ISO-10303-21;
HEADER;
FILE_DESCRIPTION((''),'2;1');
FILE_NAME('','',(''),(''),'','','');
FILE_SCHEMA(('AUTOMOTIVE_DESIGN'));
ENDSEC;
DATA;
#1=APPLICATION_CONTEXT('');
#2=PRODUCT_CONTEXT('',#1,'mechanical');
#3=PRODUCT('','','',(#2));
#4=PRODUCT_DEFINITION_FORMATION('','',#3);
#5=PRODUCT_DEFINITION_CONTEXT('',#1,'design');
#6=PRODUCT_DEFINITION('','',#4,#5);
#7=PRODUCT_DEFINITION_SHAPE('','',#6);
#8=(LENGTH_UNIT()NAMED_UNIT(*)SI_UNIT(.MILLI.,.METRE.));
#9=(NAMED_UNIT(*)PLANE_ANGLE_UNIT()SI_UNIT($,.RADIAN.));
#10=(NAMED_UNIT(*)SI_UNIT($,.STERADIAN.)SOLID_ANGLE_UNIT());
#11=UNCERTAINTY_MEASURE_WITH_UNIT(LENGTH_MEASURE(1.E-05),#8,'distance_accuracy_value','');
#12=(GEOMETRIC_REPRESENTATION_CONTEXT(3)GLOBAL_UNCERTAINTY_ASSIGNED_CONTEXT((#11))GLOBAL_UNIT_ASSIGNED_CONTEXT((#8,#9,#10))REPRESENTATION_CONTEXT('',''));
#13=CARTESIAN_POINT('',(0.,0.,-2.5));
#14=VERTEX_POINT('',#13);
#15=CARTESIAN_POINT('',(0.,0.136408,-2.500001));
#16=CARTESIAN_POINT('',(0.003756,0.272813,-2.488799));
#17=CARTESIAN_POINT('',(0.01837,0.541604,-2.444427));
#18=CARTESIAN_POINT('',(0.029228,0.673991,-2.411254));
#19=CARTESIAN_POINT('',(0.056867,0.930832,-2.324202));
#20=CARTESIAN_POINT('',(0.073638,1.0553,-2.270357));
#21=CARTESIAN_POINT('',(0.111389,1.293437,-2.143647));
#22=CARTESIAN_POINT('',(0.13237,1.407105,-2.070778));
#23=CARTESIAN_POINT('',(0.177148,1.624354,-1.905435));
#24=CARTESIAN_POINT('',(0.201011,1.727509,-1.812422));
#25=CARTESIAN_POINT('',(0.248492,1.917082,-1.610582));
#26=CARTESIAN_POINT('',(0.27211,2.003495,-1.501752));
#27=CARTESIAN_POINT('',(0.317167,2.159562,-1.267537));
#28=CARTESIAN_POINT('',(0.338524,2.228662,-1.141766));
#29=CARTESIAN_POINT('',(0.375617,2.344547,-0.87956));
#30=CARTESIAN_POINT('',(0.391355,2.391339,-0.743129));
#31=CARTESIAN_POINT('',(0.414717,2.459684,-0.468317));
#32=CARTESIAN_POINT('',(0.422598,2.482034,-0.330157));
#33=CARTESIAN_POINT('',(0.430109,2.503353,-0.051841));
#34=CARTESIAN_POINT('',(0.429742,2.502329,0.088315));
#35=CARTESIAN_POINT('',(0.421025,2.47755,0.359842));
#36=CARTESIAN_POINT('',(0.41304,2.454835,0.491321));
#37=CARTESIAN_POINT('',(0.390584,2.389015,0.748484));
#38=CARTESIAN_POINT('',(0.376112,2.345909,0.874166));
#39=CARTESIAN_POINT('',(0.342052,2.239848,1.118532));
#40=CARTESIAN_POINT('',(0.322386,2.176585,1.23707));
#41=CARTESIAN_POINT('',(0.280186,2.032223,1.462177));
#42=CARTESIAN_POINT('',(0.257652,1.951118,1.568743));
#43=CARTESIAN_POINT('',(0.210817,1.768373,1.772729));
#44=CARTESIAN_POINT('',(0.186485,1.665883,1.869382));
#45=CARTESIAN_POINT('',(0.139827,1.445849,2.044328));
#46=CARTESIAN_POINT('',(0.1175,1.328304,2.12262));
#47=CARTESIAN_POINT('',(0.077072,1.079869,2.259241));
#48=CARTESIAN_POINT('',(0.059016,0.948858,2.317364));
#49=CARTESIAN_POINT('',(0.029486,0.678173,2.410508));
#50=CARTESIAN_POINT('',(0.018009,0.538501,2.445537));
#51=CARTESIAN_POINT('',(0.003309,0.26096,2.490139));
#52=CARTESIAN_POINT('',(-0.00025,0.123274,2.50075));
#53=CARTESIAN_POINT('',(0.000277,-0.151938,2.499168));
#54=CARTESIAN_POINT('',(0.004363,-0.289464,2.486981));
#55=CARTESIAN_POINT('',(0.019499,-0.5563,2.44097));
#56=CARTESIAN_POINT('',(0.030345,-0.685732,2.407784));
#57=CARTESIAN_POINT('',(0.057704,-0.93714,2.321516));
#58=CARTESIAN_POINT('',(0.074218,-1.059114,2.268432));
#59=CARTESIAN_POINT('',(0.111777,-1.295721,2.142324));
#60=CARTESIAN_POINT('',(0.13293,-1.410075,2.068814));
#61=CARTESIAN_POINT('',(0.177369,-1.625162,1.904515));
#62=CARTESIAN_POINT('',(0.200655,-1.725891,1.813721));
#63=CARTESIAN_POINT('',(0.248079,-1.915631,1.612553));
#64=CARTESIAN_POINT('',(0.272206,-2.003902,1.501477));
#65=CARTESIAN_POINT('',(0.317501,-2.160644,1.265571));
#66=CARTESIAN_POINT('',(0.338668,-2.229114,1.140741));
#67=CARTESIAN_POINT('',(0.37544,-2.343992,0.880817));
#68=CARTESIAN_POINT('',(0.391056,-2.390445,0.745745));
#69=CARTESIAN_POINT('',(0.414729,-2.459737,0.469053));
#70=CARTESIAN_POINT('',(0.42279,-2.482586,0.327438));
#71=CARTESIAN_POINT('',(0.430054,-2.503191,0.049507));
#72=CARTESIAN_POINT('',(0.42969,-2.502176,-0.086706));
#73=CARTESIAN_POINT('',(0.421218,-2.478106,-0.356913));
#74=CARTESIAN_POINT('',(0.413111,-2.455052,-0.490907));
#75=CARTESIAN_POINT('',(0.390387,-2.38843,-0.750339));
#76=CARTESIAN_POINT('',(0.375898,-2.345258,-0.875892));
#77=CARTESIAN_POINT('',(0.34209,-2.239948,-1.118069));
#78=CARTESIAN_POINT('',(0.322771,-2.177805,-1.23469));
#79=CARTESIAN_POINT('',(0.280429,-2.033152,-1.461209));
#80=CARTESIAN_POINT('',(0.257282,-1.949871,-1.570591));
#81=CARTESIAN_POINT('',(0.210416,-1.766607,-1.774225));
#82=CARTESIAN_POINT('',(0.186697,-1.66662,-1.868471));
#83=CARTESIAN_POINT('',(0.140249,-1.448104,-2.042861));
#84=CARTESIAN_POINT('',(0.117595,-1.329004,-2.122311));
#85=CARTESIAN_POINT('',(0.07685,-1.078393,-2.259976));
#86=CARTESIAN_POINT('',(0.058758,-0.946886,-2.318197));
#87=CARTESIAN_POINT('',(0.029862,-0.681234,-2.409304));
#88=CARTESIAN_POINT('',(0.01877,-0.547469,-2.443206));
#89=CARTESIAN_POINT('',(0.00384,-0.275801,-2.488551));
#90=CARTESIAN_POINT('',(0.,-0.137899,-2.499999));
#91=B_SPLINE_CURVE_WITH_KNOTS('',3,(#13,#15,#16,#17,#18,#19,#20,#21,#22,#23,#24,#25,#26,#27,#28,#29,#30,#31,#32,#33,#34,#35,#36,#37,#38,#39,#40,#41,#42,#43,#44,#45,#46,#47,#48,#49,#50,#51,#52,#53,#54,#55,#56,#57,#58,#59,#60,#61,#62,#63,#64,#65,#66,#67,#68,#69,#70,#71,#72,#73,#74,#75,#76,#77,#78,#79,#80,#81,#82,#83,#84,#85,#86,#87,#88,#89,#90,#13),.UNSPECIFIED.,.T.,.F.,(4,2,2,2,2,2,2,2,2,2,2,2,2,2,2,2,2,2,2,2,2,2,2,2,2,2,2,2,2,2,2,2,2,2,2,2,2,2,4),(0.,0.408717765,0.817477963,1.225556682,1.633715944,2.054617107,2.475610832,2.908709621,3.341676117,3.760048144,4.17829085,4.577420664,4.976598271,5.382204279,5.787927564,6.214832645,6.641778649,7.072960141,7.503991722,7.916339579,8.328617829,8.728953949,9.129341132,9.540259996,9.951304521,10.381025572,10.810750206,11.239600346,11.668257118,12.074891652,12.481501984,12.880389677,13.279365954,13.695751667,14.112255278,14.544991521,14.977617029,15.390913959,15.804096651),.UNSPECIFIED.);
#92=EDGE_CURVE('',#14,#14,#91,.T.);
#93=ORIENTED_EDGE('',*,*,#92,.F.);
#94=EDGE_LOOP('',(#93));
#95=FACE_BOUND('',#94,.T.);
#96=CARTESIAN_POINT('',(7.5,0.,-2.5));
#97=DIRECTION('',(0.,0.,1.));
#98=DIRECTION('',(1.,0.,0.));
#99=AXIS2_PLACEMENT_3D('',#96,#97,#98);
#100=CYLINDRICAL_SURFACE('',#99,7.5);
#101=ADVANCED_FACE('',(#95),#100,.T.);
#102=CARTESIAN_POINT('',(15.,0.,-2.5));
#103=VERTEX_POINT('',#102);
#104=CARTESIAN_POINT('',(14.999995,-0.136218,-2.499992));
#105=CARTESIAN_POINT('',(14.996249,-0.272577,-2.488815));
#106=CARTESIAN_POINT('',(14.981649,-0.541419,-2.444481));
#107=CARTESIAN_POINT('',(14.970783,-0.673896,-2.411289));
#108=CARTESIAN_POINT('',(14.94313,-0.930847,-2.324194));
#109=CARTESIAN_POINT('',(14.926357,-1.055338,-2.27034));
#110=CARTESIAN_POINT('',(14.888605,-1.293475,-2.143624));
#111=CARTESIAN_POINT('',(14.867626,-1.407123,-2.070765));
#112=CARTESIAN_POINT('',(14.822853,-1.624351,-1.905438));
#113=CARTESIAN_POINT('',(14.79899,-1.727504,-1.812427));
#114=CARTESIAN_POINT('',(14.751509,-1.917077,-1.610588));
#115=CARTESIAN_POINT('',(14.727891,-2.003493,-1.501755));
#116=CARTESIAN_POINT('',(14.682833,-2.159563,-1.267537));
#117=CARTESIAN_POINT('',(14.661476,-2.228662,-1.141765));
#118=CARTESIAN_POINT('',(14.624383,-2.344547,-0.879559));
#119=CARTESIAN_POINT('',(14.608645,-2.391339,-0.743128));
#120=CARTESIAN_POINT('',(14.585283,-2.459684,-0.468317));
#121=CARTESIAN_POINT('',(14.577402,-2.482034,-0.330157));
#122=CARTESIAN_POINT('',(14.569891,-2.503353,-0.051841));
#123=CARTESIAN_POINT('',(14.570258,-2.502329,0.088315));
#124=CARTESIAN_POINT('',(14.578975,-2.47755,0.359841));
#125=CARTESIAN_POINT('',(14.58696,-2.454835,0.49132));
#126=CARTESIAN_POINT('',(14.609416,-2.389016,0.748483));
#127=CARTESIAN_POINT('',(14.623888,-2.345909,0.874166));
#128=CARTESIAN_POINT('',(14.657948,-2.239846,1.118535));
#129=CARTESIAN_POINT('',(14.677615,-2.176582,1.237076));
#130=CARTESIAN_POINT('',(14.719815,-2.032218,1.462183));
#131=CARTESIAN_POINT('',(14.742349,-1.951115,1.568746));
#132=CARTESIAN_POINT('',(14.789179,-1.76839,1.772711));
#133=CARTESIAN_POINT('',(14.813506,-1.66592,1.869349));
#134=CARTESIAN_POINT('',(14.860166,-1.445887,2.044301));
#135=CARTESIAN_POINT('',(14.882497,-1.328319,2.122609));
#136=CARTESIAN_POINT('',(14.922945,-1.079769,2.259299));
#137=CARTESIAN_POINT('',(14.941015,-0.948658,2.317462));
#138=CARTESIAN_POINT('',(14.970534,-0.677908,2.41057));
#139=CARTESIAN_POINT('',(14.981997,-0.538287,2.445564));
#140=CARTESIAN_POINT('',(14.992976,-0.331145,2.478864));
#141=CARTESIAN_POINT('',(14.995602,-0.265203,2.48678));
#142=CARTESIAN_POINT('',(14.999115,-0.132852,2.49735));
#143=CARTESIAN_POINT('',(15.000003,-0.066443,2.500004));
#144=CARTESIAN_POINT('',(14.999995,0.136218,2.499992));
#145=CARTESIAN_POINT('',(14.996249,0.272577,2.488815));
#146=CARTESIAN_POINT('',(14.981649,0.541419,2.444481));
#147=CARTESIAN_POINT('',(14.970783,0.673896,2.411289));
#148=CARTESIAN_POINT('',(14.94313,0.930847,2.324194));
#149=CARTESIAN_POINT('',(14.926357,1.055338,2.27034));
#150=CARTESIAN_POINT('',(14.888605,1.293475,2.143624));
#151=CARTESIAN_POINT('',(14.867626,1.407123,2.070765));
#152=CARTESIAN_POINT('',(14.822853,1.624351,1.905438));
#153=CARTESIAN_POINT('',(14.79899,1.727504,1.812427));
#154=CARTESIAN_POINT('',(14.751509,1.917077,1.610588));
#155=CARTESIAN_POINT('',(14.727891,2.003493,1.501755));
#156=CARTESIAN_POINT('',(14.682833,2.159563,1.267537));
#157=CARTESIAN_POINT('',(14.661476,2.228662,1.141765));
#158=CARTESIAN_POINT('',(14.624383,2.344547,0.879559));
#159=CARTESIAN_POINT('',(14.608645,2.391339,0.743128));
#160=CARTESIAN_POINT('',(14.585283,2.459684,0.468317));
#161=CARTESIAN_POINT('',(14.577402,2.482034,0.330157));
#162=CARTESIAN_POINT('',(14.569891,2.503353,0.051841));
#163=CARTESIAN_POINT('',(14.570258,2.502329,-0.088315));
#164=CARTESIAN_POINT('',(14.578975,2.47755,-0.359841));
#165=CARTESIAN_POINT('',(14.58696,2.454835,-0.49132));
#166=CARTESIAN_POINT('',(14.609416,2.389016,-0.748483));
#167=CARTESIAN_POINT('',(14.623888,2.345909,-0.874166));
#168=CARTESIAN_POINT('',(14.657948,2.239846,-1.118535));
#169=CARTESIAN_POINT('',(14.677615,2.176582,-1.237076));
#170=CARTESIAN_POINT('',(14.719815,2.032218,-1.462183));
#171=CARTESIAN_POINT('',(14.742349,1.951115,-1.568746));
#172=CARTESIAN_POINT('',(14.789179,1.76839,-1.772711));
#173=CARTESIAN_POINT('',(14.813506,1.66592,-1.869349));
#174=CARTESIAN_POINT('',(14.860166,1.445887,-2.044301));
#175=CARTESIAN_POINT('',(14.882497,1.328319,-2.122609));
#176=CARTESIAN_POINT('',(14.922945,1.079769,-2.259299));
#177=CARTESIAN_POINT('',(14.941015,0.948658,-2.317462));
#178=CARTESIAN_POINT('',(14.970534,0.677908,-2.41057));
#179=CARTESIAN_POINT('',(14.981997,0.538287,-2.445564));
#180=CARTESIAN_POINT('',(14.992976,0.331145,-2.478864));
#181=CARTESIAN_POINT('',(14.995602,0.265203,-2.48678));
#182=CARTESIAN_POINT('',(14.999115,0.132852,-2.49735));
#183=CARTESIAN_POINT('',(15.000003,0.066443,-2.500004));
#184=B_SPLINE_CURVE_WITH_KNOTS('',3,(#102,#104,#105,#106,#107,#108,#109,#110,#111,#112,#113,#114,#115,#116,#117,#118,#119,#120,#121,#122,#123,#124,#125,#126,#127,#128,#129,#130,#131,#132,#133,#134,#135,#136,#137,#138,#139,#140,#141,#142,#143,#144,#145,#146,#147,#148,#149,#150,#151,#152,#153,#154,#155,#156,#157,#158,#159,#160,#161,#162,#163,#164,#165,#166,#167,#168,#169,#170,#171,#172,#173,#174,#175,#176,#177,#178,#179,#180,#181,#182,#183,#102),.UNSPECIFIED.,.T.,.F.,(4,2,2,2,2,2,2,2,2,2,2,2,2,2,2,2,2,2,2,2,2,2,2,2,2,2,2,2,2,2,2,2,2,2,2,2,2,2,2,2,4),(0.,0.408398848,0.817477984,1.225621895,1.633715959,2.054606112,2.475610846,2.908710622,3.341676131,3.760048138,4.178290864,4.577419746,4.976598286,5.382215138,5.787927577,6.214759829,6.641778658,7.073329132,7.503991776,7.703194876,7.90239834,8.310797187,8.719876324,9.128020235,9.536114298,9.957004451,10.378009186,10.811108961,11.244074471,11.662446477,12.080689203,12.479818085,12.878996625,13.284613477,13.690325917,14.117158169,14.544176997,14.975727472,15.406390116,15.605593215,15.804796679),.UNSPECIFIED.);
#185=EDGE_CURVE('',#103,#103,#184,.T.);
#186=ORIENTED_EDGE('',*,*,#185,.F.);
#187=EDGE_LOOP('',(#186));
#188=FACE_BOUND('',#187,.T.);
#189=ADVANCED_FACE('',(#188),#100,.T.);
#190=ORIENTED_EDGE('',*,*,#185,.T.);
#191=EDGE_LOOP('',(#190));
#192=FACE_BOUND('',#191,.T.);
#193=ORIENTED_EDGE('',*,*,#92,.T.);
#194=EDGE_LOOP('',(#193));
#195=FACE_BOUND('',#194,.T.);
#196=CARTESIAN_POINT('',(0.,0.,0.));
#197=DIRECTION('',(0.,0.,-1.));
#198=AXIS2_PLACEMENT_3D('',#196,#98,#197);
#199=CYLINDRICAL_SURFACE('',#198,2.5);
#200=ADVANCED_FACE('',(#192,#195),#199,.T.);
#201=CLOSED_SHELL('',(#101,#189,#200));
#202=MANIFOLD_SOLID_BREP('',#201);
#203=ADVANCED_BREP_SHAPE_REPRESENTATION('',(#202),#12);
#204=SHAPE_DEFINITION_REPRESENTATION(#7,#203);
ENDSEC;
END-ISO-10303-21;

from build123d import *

# Parameters (mm, degrees)
SKETCH1_W          = 15
SKETCH1_H          = 2.5
CUT_EXTRUDE1_START = -2.500000104
CUT_EXTRUDE1_DEPTH = 5.000000104


# Read off the part's stored shape, not the designer's step: Cut-Extrude1
with BuildPart() as part:
    # Sketch1 → Revolve1 (revolve)
    with BuildSketch(Plane.XY, mode=Mode.PRIVATE) as revolve1_sk:
        with Locations((7.5, 1.25)):
            Rectangle(SKETCH1_W, SKETCH1_H)
    revolve(revolve1_sk.sketch.rotate(Axis((0, 0, 0), (-1, 0, 0)), 90), axis=Axis((0, 0, 0), (-1, 0, 0)))

    # Cut-Extrude1 outline → Cut-Extrude1 (cut)
    with BuildSketch(Plane.XY.offset(CUT_EXTRUDE1_START)):
        with BuildLine():
            ThreePointArc((15, 0), (14.891942024, -1.268539759), (14.570881835, -2.500525961))
            Line((14.570881835, -2.500525961), (14.040612224, -4))
            Line((14.040612224, -4), (15, -4))
            Line((15, -4), (15, 0))
        make_face()
        with BuildLine():
            ThreePointArc((14.570881835, 2.500525961), (14.891942024, 1.268539759), (15, 0))
            Line((15, 0), (15, 4))
            Line((15, 4), (14.040612224, 4))
            Line((14.040612224, 4), (14.570881835, 2.500525961))
        make_face()
        with BuildLine():
            Line((0, -4), (0.959302832, -4))
            Line((0.959302832, -4), (0.428992279, -2.500169957))
            ThreePointArc((0.428992279, -2.500169957), (0.108026045, -1.268353676), (0, -1e-09))
            Line((0, -1e-09), (0, -4))
        make_face()
        with BuildLine():
            Line((0.428990761, 2.500165664), (0.959301807, 4))
            Line((0.959301807, 4), (0, 4))
            Line((0, 4), (0, -1e-09))
            ThreePointArc((0, -1e-09), (0.10802566, 1.268351432), (0.428990761, 2.500165664))
        make_face()
    extrude(amount=CUT_EXTRUDE1_DEPTH, mode=Mode.SUBTRACT)


solid = part.part
